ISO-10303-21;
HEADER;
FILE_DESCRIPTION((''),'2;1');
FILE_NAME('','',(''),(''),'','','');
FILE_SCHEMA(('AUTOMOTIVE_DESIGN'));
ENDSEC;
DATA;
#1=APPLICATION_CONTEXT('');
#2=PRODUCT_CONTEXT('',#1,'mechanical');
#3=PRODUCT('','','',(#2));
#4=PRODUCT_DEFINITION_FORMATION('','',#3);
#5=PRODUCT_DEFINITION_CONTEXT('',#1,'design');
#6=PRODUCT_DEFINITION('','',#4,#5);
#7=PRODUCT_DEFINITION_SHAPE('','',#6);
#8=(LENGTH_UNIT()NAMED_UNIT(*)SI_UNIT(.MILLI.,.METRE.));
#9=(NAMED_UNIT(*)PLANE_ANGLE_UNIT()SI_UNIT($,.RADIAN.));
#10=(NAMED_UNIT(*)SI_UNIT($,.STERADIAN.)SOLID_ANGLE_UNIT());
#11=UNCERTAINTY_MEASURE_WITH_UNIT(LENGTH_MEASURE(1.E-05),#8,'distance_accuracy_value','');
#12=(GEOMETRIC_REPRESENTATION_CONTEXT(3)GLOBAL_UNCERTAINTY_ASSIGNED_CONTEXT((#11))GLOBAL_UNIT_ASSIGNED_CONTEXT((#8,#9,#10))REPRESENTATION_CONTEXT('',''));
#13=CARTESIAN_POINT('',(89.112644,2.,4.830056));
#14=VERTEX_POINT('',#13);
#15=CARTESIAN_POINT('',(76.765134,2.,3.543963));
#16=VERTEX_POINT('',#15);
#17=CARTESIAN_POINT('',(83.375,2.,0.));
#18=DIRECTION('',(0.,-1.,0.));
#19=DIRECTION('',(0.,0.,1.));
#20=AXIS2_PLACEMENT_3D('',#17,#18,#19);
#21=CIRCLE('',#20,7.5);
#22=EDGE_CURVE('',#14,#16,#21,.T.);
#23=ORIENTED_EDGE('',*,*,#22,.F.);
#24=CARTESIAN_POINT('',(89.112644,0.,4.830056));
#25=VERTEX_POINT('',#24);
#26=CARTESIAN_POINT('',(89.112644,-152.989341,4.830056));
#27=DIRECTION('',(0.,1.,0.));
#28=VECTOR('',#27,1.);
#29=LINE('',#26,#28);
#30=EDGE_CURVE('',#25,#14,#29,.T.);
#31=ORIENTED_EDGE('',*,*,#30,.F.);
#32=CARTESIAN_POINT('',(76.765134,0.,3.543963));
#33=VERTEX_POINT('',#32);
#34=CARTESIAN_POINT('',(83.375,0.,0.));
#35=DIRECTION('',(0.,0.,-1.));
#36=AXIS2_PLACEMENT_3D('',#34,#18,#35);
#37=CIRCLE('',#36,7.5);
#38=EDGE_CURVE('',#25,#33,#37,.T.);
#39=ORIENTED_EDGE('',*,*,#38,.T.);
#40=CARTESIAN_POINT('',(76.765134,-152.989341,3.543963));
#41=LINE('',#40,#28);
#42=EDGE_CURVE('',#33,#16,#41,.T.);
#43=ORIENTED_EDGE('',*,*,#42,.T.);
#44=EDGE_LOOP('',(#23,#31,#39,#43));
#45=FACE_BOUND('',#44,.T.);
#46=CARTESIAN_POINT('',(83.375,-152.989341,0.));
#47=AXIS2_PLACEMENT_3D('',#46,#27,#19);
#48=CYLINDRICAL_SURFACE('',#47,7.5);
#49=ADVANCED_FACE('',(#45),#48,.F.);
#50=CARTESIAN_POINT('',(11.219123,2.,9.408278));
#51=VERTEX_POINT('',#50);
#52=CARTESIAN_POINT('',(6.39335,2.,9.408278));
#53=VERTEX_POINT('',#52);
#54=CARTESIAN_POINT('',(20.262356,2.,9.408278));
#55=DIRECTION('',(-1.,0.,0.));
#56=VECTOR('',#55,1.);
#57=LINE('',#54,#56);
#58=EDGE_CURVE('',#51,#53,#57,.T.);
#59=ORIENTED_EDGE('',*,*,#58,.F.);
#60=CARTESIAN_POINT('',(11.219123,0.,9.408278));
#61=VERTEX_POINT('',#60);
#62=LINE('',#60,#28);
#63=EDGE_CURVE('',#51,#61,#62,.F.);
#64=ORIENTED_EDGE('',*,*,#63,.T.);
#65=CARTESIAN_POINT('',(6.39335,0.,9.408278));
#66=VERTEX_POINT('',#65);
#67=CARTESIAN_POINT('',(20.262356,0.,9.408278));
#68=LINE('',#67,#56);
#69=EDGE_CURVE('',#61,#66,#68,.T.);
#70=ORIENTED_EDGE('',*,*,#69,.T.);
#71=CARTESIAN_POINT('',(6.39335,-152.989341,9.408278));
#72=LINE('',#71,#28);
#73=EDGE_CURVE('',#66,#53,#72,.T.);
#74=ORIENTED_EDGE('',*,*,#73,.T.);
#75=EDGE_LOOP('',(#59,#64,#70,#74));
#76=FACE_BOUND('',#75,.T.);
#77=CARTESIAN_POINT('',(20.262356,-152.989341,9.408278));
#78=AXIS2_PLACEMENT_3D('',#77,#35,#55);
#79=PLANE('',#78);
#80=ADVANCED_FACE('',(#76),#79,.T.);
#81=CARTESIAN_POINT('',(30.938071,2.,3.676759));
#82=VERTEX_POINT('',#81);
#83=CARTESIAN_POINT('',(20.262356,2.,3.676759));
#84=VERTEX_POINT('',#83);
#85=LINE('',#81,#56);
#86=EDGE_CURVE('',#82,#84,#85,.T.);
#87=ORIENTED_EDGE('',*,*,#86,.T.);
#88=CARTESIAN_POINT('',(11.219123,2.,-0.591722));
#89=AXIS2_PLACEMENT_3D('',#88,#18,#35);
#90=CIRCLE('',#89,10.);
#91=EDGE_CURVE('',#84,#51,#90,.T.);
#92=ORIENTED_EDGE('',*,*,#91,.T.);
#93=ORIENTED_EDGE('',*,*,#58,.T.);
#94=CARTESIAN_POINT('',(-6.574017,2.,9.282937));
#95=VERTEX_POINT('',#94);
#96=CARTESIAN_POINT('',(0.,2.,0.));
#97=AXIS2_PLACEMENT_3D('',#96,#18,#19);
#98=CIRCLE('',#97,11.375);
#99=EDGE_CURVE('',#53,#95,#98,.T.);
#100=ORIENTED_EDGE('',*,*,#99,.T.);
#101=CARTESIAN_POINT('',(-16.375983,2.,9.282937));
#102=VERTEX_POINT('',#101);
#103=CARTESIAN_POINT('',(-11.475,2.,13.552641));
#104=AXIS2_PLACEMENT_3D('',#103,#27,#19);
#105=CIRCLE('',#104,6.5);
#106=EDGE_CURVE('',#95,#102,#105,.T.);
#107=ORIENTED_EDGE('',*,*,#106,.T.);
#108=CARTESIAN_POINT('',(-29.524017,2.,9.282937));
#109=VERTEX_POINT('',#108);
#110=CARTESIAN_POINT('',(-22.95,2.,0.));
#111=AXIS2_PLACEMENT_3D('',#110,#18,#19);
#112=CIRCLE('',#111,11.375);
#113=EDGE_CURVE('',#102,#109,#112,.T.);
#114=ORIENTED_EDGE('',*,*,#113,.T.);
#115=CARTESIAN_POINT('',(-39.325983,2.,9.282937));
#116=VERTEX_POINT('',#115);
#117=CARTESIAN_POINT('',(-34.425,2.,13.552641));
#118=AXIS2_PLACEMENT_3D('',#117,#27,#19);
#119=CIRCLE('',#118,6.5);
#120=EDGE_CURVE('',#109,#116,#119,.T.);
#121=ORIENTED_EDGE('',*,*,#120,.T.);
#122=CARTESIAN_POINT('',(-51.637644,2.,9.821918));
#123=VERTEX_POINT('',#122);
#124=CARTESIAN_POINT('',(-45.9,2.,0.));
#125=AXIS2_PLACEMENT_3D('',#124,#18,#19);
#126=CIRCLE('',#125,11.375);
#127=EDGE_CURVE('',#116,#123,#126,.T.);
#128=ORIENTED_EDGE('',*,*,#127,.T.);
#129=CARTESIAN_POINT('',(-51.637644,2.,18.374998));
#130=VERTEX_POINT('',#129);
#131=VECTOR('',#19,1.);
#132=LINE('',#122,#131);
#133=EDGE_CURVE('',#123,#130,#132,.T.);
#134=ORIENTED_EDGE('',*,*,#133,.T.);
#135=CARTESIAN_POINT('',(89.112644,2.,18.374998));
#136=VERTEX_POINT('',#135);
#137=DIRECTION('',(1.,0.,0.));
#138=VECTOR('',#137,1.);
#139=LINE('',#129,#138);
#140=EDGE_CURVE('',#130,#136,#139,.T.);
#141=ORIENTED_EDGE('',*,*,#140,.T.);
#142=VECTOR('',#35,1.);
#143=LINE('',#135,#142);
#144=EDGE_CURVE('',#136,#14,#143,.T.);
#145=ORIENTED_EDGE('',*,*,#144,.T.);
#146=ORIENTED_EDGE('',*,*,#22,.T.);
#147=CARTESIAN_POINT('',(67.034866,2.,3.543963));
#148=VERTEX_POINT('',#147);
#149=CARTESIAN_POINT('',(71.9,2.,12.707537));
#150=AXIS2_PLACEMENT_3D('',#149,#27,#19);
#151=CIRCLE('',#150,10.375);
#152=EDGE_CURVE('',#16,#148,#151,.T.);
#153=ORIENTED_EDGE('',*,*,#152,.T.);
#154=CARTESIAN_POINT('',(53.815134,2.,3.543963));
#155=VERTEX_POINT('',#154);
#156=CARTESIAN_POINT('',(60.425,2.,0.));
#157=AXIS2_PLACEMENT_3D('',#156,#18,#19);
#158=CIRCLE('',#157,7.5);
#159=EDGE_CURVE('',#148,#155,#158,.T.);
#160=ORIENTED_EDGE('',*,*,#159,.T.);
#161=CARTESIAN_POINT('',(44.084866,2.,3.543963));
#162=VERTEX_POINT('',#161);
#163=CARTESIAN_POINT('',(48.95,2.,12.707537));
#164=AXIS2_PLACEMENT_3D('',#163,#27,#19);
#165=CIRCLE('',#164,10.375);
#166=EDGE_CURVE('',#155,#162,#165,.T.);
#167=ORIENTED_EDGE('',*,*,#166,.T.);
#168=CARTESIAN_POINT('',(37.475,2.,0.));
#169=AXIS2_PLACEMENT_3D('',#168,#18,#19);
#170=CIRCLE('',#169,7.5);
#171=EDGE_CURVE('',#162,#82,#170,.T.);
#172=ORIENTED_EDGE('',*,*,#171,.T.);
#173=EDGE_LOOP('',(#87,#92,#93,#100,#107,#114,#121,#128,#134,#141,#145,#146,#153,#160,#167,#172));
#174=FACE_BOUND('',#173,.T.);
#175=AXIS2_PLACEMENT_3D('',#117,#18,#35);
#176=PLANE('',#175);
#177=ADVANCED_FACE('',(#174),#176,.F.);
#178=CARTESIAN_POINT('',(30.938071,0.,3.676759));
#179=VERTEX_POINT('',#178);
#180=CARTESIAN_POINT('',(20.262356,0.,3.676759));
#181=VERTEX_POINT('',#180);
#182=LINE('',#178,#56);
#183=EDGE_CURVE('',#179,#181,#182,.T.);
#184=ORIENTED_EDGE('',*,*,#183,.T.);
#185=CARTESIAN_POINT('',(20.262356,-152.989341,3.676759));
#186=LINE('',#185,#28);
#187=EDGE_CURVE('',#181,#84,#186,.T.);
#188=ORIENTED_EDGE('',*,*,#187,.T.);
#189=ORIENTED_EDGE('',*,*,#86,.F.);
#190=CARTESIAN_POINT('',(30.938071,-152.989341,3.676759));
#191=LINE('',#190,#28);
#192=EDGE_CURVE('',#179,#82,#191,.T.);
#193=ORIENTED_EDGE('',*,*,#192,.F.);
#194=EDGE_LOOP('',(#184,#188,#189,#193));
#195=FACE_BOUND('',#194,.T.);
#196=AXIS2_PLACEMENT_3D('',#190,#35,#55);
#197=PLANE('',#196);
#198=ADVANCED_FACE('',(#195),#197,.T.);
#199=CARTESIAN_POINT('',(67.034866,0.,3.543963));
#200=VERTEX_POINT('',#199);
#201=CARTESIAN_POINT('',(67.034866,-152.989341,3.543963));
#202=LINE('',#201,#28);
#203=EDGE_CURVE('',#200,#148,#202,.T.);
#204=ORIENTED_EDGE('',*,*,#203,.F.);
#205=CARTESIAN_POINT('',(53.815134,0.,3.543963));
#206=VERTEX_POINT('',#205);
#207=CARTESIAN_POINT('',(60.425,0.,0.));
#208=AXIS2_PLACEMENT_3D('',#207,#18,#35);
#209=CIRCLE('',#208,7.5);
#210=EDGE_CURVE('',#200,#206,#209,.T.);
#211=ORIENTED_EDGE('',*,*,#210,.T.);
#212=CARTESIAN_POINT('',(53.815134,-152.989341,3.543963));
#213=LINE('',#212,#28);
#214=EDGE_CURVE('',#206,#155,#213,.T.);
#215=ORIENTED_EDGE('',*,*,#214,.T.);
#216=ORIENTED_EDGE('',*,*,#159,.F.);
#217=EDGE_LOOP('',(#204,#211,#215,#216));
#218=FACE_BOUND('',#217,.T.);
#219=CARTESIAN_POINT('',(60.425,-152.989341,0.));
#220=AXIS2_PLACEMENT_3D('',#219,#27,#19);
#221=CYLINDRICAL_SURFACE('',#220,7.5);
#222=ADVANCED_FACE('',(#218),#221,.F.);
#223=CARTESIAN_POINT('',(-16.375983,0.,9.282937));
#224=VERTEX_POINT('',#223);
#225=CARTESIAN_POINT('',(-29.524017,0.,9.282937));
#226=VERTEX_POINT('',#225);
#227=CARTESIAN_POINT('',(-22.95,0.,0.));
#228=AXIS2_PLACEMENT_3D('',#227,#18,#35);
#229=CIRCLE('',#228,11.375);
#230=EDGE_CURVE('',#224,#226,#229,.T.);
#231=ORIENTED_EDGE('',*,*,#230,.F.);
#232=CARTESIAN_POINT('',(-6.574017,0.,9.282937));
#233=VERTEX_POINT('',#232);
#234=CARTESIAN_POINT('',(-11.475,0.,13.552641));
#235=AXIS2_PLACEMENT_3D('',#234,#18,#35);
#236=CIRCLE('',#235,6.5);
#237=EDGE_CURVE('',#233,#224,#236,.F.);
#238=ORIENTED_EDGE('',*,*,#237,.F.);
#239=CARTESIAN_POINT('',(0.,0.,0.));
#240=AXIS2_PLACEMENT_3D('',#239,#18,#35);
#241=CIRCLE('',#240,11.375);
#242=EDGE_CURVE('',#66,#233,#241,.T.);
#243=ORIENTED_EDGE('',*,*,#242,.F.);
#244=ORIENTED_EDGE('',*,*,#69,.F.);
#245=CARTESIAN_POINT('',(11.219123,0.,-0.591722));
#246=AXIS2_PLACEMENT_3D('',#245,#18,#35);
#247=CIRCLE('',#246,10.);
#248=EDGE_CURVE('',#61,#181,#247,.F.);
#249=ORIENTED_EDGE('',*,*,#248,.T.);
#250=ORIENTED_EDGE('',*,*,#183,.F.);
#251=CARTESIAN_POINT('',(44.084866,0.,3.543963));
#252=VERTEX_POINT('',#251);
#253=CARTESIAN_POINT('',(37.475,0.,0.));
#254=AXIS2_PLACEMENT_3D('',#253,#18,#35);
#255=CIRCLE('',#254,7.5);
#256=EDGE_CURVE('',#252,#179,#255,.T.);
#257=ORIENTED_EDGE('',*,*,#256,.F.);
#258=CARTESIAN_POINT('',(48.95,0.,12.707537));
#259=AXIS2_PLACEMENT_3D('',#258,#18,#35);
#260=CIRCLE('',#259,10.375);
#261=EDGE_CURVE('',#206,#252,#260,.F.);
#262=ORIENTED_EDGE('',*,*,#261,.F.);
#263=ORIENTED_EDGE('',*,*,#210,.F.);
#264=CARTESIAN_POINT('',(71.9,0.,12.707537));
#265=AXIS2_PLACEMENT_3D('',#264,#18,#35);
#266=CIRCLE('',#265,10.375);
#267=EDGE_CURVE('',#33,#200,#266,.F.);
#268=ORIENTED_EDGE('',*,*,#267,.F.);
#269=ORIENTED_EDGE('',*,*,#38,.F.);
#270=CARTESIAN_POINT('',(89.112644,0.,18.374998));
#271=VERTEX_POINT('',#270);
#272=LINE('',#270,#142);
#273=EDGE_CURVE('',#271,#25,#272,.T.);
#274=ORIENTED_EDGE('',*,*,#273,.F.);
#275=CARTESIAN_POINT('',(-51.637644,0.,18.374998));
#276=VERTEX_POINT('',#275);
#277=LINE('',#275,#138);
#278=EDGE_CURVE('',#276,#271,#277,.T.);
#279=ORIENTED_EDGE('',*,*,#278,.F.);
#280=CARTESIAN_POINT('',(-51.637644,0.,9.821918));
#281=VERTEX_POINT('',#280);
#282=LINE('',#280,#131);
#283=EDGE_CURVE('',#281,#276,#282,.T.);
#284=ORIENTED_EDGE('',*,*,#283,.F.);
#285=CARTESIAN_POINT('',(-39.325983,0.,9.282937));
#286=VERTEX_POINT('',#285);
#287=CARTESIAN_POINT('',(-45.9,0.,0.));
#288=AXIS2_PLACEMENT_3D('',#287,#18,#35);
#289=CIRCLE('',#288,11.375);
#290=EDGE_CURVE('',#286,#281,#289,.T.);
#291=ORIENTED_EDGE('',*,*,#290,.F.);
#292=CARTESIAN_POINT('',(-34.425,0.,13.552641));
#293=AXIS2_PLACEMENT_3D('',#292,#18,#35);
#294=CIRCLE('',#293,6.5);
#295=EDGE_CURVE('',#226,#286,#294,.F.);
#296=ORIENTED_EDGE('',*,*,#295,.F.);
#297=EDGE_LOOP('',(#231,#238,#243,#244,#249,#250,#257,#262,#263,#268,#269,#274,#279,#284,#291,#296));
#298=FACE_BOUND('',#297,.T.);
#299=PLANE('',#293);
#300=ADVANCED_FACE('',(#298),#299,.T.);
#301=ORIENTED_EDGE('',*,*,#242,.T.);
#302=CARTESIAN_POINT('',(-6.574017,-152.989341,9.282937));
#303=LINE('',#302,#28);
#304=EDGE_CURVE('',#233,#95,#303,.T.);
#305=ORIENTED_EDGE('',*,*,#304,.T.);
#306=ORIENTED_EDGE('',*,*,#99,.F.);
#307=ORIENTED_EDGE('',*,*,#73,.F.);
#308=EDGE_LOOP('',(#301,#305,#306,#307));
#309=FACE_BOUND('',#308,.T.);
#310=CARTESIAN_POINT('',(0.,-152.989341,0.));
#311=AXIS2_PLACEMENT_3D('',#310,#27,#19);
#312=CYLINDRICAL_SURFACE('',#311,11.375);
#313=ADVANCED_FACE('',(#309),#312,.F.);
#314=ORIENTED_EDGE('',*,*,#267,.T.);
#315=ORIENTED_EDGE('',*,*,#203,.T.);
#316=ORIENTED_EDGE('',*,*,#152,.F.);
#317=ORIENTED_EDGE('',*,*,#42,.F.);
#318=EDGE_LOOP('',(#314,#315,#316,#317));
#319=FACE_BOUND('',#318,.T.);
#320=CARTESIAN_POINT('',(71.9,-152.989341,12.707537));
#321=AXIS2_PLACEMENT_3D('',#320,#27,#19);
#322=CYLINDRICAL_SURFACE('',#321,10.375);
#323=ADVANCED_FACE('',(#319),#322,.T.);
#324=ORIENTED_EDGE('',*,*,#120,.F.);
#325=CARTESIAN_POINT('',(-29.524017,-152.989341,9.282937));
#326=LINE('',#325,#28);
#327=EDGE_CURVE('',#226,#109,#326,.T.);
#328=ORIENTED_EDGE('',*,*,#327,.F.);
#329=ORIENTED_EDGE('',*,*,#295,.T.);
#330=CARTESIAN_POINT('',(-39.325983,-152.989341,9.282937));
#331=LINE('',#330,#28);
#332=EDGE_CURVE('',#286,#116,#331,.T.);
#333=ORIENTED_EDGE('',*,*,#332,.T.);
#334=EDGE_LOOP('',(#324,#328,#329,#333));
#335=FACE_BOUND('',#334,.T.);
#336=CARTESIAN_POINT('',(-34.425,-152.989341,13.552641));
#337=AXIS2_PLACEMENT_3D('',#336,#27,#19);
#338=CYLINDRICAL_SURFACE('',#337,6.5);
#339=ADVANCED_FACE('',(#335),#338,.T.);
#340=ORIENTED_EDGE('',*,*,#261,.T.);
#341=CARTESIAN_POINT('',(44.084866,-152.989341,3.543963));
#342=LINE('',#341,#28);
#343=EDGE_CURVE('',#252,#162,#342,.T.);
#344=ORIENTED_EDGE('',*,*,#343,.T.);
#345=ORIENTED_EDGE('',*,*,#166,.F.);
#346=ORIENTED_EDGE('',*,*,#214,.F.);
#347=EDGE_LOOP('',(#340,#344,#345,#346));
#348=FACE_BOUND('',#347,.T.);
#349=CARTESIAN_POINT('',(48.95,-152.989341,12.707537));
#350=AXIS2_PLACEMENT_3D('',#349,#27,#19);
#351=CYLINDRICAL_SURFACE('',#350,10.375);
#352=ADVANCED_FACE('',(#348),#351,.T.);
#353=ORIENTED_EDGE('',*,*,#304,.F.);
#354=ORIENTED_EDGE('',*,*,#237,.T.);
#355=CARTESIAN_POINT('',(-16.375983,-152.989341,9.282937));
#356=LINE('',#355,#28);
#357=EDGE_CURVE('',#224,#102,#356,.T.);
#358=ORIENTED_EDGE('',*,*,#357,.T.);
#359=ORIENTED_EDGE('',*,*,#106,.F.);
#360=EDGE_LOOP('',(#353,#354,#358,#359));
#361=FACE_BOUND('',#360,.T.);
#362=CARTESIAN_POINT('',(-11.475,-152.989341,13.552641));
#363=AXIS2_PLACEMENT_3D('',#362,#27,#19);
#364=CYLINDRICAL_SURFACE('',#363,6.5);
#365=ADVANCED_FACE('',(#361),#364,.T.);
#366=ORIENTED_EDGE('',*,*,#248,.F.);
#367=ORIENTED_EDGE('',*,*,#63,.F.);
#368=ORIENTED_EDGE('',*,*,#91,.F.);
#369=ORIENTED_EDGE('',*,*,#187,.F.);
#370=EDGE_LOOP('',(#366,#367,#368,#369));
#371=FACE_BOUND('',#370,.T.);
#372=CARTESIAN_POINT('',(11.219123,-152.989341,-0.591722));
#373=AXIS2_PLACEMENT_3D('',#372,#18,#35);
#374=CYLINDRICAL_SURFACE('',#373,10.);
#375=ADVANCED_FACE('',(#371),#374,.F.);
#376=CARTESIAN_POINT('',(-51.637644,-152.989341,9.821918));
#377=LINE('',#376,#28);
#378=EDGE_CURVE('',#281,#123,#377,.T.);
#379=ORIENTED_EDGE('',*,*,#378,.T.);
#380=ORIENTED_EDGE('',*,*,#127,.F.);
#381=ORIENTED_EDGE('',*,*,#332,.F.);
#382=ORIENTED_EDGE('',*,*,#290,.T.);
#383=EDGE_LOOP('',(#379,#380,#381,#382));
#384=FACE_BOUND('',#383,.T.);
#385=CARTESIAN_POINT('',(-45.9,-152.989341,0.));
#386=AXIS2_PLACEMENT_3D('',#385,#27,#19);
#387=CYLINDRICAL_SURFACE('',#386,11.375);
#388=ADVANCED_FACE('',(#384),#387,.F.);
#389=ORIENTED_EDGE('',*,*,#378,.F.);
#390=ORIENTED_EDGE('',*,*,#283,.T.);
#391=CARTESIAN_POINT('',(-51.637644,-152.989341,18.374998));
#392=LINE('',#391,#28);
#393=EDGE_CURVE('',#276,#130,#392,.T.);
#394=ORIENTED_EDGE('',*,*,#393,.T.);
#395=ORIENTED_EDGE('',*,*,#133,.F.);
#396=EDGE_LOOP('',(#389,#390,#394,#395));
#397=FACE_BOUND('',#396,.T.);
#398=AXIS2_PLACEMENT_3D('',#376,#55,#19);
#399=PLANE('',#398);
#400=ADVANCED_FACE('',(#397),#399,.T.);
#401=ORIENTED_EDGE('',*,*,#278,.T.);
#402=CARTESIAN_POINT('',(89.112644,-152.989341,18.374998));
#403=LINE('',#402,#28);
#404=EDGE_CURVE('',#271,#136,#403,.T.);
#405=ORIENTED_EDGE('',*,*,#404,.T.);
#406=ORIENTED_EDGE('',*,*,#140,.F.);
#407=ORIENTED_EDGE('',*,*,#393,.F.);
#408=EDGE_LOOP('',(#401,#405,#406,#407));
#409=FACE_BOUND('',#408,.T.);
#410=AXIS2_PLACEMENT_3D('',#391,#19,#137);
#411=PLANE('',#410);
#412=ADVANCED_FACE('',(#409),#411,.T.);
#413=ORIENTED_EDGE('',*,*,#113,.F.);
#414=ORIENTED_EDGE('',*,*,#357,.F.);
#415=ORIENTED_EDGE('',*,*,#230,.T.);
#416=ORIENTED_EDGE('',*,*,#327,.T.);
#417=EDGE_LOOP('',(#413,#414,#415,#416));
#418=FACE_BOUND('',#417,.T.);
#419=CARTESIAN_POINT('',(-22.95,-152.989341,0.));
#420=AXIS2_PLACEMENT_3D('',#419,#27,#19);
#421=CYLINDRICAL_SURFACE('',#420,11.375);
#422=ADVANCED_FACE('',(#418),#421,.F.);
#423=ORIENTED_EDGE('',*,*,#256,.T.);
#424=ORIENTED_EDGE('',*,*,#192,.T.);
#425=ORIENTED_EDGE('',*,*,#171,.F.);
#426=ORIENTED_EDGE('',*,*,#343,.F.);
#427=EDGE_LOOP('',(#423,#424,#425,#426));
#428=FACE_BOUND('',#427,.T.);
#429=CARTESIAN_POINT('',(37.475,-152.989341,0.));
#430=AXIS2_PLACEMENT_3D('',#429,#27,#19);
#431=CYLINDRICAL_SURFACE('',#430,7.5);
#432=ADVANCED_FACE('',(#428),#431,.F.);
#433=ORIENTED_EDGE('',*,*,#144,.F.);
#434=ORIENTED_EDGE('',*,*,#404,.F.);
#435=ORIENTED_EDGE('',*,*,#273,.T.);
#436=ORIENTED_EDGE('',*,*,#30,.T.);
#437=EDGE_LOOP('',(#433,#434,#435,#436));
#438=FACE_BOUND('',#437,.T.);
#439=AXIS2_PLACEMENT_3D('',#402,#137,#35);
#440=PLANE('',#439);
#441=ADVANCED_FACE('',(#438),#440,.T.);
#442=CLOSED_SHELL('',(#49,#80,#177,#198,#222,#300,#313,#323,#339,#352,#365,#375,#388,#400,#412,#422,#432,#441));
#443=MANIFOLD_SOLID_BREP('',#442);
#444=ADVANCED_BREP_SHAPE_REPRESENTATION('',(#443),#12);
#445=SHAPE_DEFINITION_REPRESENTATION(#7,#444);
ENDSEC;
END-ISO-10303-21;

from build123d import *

# Parameters (mm, degrees)
BOSS_EXTRUDE1_DEPTH = 2
SKETCH3_W           = 150.539703927
SKETCH3_H           = 27.267854048
CUT_EXTRUDE2_DEPTH  = 2
FILLET2_R           = 10


with BuildPart() as part:
    # Sketch1 → Boss-Extrude1 (new body)
    with BuildSketch(Plane(origin=(0, 0, 0), x_dir=(1, 0, 0), z_dir=(0, 1, 0))):
        with BuildLine():
            Line((-52.137643745, -8.908278482), (-52.137643745, -18.874998482))
            Line((-52.137643745, -18.874998482), (89.612643745, -18.874998482))
            Line((89.612643745, -18.874998482), (89.612643745, -3.176759435))
            ThreePointArc((89.612643745, -3.176759435), (83.375, -7), (77.137356255, -3.176759435))
            ThreePointArc((77.137356255, -3.176759435), (71.9, -1.832537182), (66.662643745, -3.176759435))
            ThreePointArc((66.662643745, -3.176759435), (60.425, -7), (54.187356255, -3.176759435))
            ThreePointArc((54.187356255, -3.176759435), (48.95, -1.832537182), (43.712643745, -3.176759435))
            ThreePointArc((43.712643745, -3.176759435), (37.475, -7), (31.237356255, -3.176759435))
            Line((31.237356255, -3.176759435), (19.762356255, -3.176759435))
            Line((19.762356255, -3.176759435), (19.762356255, -8.908278482))
            Line((19.762356255, -8.908278482), (6.237643745, -8.908278482))
            ThreePointArc((6.237643745, -8.908278482), (0, -10.875), (-6.237643745, -8.908278482))
            ThreePointArc((-6.237643745, -8.908278482), (-11.475, -6.552640597), (-16.712356255, -8.908278482))
            ThreePointArc((-16.712356255, -8.908278482), (-22.95, -10.875), (-29.187643745, -8.908278482))
            ThreePointArc((-29.187643745, -8.908278482), (-34.425, -6.552640597), (-39.662356255, -8.908278482))
            ThreePointArc((-39.662356255, -8.908278482), (-45.9, -10.875), (-52.137643745, -8.908278482))
        make_face()
    extrude(amount=BOSS_EXTRUDE1_DEPTH)

    # Sketch3 → Cut-Extrude2 (cut)
    with BuildSketch(Plane(origin=(0, 2, 0), x_dir=(1, 0, 0), z_dir=(0, 1, 0))):
        with Locations((17.759945942, -9.959763718)):
            Rectangle(SKETCH3_W, SKETCH3_H)
        with BuildLine():
            Line((89.112643745, -18.374998482), (89.112643745, -4.83005634))
            ThreePointArc((89.112643745, -4.83005634), (82.598017349, -7.459644627), (76.765134062, -3.543962794))
            ThreePointArc((76.765134062, -3.543962794), (71.9, -2.332537182), (67.034865938, -3.543962794))
            ThreePointArc((67.034865938, -3.543962794), (60.425, -7.5), (53.815134062, -3.543962794))
            ThreePointArc((53.815134062, -3.543962794), (48.95, -2.332537182), (44.084865938, -3.543962794))
            ThreePointArc((44.084865938, -3.543962794), (37.550754129, -7.499617411), (30.938071053, -3.676759435))
            Line((30.938071053, -3.676759435), (20.262356255, -3.676759435))
            Line((20.262356255, -3.676759435), (20.262356255, -9.408278482))
            Line((20.262356255, -9.408278482), (6.393349749, -9.408278482))
            ThreePointArc((6.393349749, -9.408278482), (-0.109944429, -11.374468657), (-6.574017094, -9.282937264))
            ThreePointArc((-6.574017094, -9.282937264), (-11.475, -7.052640597), (-16.375982906, -9.282937264))
            ThreePointArc((-16.375982906, -9.282937264), (-22.95, -11.375), (-29.524017094, -9.282937264))
            ThreePointArc((-29.524017094, -9.282937264), (-34.425, -7.052640597), (-39.325982906, -9.282937264))
            ThreePointArc((-39.325982906, -9.282937264), (-45.402501157, -11.364115447), (-51.637643745, -9.821917799))
            Line((-51.637643745, -9.821917799), (-51.637643745, -18.374998482))
            Line((-51.637643745, -18.374998482), (89.112643745, -18.374998482))
        make_face(mode=Mode.SUBTRACT)
    extrude(amount=-CUT_EXTRUDE2_DEPTH, mode=Mode.SUBTRACT)

    # Fillet2
    # the kernel refuses this fillet: 10 mm, written as the material it adds along each edge
    with BuildSketch(Plane(origin=(20.262356255, 2, 9.408278482), x_dir=(-1, 0, 0), z_dir=(0, -1, 0))) as fillet2_piece_1:
        with BuildLine():
            CenterArc((9.043233401, 10), FILLET2_R, 205.267698006, 64.732301994)
            Line((0, 5.731519047), (-0.180864668, 5.646149428))
            ThreePointArc((-0.180864668, 5.646149428), (-0.2, 2.865759523), (-0.2, 0))
            Line((-0.2, 0), (0, -0.2))
            Line((0, -0.2), (9.043233401, -0.2))
            Line((9.043233401, -0.2), (9.043233401, 0))
        make_face()
    extrude(amount=2)


solid = part.part
